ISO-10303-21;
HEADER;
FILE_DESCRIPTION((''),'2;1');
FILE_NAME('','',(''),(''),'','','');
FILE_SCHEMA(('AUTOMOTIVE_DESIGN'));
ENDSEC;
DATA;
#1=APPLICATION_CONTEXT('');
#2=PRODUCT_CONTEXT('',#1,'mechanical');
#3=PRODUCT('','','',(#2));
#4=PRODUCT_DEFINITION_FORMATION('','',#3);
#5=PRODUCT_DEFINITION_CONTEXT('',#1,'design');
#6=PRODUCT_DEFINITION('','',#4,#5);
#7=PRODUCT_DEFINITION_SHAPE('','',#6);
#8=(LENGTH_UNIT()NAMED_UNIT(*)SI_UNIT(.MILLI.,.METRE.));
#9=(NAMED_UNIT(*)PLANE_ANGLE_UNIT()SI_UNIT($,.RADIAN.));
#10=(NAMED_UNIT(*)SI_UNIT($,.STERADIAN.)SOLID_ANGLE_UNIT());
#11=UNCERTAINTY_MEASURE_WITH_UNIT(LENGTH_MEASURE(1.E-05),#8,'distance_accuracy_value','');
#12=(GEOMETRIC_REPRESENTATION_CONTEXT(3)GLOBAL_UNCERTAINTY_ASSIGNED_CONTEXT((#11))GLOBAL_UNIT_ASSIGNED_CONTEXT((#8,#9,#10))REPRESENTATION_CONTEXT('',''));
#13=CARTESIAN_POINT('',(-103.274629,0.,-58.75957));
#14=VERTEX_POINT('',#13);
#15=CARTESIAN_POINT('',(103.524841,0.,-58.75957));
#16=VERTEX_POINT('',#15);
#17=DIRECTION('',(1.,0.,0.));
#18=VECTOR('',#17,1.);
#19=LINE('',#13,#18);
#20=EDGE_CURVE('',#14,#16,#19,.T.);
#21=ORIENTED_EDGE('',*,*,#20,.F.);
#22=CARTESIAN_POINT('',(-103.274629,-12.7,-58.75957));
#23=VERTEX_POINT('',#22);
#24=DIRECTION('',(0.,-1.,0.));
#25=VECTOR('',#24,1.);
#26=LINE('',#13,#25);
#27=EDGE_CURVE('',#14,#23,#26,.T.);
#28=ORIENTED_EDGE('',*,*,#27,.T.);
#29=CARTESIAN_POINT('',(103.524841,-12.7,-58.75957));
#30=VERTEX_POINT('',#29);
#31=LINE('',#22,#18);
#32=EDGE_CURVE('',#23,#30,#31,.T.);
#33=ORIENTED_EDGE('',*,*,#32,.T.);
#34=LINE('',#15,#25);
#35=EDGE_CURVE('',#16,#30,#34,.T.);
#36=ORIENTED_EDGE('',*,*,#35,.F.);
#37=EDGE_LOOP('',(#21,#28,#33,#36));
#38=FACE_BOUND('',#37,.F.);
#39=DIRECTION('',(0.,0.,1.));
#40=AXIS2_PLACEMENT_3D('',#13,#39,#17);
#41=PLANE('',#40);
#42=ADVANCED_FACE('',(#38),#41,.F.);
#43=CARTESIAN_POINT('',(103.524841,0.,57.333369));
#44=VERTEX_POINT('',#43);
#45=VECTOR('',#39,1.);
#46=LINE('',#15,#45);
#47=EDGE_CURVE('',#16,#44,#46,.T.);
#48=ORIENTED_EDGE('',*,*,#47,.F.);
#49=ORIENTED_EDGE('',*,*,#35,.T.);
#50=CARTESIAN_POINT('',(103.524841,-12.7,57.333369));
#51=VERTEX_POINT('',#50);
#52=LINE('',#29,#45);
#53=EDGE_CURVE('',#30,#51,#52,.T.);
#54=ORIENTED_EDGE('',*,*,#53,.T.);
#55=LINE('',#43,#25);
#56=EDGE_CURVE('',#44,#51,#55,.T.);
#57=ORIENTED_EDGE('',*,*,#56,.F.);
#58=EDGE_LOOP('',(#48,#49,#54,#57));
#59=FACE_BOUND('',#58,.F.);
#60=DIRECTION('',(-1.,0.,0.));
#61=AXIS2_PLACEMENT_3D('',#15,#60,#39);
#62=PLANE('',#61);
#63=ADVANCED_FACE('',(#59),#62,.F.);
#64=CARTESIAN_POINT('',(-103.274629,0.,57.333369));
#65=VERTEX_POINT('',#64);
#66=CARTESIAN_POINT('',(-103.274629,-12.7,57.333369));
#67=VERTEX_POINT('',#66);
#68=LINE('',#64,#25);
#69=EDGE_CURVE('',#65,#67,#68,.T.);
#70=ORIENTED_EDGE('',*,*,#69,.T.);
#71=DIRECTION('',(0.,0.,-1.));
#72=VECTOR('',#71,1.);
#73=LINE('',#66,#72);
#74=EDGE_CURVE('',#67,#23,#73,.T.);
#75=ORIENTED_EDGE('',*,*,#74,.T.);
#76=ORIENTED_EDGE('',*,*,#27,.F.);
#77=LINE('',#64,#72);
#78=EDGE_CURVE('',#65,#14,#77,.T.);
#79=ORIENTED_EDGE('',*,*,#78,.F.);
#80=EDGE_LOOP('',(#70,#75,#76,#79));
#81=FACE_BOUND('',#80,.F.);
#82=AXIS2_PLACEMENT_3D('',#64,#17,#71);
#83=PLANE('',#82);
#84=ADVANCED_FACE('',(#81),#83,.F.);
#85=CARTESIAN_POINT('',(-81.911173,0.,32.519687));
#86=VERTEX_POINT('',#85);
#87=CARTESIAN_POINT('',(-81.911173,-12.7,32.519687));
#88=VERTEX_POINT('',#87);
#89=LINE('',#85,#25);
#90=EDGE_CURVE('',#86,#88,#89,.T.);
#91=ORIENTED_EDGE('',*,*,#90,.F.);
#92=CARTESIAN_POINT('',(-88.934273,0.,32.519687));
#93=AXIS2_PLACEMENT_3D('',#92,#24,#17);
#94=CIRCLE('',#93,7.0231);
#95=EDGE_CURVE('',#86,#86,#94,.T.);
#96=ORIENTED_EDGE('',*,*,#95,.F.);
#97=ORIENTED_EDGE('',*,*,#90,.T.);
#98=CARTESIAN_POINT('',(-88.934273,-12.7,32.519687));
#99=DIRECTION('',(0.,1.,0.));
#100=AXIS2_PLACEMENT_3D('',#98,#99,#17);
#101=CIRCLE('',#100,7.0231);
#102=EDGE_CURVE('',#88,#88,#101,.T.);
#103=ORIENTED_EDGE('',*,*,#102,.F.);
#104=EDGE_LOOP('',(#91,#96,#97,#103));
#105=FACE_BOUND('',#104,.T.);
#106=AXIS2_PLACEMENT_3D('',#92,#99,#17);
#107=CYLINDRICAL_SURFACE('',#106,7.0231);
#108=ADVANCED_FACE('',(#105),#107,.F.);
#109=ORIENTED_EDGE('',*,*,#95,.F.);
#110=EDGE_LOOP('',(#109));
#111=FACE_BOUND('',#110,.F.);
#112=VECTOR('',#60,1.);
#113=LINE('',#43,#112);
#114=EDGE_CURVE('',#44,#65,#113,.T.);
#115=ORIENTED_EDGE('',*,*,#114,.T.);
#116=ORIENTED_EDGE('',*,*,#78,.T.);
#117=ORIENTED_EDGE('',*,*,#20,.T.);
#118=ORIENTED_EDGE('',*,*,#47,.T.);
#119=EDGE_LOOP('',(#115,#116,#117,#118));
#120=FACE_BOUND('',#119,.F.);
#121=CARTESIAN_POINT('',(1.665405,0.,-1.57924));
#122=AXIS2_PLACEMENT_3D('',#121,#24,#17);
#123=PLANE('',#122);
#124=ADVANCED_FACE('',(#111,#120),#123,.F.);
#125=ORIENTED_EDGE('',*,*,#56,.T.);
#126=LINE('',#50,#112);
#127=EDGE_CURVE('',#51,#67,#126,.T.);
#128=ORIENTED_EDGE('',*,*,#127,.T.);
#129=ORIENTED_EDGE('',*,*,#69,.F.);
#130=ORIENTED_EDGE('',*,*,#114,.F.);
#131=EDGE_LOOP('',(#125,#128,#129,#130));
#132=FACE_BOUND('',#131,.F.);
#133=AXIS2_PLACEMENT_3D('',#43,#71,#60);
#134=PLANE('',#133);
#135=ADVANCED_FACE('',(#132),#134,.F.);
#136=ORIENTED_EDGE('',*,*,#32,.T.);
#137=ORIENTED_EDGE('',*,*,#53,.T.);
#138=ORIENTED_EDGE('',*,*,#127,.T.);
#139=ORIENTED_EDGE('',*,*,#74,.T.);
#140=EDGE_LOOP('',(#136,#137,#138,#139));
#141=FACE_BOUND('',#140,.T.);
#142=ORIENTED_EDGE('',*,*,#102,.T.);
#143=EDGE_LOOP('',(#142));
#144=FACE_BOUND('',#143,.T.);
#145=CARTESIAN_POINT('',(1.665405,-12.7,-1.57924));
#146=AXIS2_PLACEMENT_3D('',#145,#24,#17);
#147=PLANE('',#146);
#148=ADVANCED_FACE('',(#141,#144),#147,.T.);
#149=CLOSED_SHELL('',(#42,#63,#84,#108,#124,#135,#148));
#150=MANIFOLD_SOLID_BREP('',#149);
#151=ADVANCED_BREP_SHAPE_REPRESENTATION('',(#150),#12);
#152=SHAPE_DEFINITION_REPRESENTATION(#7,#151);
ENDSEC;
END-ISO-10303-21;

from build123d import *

# Parameters (mm, degrees)
F1_W     = 5.1343291998
F1_H     = 4.8490911722
F2_DEPTH = 12.7
F0_R     = 7.0231
F3_DEPTH = 25.4


with BuildPart() as f2:
    # F1 (on Front) → F2 (new body)
    with BuildSketch(Plane.XZ):
        Polygon((103.5248413682, 57.333368808), (-103.27462852, 57.333368808), (-103.27462852, -58.7595701218), (103.5248413682, -58.7595701218), (103.5248413682, -58.4743283689), (98.3905121684, -58.4743283689), (98.3905121684, -53.6252371967), (103.5248413682, -53.6252371967), align=None)
        with Locations((100.9576767683, -56.0497827828)):
            Rectangle(F1_W, F1_H)
    extrude(amount=F2_DEPTH)

    # F0 (on Front) → F3 (cut)
    with BuildSketch(Plane.XZ):
        with Locations((-88.9342725277, 32.5196869671)):
            Circle(F0_R)
    extrude(amount=F3_DEPTH, mode=Mode.SUBTRACT)


solid = f2.part
